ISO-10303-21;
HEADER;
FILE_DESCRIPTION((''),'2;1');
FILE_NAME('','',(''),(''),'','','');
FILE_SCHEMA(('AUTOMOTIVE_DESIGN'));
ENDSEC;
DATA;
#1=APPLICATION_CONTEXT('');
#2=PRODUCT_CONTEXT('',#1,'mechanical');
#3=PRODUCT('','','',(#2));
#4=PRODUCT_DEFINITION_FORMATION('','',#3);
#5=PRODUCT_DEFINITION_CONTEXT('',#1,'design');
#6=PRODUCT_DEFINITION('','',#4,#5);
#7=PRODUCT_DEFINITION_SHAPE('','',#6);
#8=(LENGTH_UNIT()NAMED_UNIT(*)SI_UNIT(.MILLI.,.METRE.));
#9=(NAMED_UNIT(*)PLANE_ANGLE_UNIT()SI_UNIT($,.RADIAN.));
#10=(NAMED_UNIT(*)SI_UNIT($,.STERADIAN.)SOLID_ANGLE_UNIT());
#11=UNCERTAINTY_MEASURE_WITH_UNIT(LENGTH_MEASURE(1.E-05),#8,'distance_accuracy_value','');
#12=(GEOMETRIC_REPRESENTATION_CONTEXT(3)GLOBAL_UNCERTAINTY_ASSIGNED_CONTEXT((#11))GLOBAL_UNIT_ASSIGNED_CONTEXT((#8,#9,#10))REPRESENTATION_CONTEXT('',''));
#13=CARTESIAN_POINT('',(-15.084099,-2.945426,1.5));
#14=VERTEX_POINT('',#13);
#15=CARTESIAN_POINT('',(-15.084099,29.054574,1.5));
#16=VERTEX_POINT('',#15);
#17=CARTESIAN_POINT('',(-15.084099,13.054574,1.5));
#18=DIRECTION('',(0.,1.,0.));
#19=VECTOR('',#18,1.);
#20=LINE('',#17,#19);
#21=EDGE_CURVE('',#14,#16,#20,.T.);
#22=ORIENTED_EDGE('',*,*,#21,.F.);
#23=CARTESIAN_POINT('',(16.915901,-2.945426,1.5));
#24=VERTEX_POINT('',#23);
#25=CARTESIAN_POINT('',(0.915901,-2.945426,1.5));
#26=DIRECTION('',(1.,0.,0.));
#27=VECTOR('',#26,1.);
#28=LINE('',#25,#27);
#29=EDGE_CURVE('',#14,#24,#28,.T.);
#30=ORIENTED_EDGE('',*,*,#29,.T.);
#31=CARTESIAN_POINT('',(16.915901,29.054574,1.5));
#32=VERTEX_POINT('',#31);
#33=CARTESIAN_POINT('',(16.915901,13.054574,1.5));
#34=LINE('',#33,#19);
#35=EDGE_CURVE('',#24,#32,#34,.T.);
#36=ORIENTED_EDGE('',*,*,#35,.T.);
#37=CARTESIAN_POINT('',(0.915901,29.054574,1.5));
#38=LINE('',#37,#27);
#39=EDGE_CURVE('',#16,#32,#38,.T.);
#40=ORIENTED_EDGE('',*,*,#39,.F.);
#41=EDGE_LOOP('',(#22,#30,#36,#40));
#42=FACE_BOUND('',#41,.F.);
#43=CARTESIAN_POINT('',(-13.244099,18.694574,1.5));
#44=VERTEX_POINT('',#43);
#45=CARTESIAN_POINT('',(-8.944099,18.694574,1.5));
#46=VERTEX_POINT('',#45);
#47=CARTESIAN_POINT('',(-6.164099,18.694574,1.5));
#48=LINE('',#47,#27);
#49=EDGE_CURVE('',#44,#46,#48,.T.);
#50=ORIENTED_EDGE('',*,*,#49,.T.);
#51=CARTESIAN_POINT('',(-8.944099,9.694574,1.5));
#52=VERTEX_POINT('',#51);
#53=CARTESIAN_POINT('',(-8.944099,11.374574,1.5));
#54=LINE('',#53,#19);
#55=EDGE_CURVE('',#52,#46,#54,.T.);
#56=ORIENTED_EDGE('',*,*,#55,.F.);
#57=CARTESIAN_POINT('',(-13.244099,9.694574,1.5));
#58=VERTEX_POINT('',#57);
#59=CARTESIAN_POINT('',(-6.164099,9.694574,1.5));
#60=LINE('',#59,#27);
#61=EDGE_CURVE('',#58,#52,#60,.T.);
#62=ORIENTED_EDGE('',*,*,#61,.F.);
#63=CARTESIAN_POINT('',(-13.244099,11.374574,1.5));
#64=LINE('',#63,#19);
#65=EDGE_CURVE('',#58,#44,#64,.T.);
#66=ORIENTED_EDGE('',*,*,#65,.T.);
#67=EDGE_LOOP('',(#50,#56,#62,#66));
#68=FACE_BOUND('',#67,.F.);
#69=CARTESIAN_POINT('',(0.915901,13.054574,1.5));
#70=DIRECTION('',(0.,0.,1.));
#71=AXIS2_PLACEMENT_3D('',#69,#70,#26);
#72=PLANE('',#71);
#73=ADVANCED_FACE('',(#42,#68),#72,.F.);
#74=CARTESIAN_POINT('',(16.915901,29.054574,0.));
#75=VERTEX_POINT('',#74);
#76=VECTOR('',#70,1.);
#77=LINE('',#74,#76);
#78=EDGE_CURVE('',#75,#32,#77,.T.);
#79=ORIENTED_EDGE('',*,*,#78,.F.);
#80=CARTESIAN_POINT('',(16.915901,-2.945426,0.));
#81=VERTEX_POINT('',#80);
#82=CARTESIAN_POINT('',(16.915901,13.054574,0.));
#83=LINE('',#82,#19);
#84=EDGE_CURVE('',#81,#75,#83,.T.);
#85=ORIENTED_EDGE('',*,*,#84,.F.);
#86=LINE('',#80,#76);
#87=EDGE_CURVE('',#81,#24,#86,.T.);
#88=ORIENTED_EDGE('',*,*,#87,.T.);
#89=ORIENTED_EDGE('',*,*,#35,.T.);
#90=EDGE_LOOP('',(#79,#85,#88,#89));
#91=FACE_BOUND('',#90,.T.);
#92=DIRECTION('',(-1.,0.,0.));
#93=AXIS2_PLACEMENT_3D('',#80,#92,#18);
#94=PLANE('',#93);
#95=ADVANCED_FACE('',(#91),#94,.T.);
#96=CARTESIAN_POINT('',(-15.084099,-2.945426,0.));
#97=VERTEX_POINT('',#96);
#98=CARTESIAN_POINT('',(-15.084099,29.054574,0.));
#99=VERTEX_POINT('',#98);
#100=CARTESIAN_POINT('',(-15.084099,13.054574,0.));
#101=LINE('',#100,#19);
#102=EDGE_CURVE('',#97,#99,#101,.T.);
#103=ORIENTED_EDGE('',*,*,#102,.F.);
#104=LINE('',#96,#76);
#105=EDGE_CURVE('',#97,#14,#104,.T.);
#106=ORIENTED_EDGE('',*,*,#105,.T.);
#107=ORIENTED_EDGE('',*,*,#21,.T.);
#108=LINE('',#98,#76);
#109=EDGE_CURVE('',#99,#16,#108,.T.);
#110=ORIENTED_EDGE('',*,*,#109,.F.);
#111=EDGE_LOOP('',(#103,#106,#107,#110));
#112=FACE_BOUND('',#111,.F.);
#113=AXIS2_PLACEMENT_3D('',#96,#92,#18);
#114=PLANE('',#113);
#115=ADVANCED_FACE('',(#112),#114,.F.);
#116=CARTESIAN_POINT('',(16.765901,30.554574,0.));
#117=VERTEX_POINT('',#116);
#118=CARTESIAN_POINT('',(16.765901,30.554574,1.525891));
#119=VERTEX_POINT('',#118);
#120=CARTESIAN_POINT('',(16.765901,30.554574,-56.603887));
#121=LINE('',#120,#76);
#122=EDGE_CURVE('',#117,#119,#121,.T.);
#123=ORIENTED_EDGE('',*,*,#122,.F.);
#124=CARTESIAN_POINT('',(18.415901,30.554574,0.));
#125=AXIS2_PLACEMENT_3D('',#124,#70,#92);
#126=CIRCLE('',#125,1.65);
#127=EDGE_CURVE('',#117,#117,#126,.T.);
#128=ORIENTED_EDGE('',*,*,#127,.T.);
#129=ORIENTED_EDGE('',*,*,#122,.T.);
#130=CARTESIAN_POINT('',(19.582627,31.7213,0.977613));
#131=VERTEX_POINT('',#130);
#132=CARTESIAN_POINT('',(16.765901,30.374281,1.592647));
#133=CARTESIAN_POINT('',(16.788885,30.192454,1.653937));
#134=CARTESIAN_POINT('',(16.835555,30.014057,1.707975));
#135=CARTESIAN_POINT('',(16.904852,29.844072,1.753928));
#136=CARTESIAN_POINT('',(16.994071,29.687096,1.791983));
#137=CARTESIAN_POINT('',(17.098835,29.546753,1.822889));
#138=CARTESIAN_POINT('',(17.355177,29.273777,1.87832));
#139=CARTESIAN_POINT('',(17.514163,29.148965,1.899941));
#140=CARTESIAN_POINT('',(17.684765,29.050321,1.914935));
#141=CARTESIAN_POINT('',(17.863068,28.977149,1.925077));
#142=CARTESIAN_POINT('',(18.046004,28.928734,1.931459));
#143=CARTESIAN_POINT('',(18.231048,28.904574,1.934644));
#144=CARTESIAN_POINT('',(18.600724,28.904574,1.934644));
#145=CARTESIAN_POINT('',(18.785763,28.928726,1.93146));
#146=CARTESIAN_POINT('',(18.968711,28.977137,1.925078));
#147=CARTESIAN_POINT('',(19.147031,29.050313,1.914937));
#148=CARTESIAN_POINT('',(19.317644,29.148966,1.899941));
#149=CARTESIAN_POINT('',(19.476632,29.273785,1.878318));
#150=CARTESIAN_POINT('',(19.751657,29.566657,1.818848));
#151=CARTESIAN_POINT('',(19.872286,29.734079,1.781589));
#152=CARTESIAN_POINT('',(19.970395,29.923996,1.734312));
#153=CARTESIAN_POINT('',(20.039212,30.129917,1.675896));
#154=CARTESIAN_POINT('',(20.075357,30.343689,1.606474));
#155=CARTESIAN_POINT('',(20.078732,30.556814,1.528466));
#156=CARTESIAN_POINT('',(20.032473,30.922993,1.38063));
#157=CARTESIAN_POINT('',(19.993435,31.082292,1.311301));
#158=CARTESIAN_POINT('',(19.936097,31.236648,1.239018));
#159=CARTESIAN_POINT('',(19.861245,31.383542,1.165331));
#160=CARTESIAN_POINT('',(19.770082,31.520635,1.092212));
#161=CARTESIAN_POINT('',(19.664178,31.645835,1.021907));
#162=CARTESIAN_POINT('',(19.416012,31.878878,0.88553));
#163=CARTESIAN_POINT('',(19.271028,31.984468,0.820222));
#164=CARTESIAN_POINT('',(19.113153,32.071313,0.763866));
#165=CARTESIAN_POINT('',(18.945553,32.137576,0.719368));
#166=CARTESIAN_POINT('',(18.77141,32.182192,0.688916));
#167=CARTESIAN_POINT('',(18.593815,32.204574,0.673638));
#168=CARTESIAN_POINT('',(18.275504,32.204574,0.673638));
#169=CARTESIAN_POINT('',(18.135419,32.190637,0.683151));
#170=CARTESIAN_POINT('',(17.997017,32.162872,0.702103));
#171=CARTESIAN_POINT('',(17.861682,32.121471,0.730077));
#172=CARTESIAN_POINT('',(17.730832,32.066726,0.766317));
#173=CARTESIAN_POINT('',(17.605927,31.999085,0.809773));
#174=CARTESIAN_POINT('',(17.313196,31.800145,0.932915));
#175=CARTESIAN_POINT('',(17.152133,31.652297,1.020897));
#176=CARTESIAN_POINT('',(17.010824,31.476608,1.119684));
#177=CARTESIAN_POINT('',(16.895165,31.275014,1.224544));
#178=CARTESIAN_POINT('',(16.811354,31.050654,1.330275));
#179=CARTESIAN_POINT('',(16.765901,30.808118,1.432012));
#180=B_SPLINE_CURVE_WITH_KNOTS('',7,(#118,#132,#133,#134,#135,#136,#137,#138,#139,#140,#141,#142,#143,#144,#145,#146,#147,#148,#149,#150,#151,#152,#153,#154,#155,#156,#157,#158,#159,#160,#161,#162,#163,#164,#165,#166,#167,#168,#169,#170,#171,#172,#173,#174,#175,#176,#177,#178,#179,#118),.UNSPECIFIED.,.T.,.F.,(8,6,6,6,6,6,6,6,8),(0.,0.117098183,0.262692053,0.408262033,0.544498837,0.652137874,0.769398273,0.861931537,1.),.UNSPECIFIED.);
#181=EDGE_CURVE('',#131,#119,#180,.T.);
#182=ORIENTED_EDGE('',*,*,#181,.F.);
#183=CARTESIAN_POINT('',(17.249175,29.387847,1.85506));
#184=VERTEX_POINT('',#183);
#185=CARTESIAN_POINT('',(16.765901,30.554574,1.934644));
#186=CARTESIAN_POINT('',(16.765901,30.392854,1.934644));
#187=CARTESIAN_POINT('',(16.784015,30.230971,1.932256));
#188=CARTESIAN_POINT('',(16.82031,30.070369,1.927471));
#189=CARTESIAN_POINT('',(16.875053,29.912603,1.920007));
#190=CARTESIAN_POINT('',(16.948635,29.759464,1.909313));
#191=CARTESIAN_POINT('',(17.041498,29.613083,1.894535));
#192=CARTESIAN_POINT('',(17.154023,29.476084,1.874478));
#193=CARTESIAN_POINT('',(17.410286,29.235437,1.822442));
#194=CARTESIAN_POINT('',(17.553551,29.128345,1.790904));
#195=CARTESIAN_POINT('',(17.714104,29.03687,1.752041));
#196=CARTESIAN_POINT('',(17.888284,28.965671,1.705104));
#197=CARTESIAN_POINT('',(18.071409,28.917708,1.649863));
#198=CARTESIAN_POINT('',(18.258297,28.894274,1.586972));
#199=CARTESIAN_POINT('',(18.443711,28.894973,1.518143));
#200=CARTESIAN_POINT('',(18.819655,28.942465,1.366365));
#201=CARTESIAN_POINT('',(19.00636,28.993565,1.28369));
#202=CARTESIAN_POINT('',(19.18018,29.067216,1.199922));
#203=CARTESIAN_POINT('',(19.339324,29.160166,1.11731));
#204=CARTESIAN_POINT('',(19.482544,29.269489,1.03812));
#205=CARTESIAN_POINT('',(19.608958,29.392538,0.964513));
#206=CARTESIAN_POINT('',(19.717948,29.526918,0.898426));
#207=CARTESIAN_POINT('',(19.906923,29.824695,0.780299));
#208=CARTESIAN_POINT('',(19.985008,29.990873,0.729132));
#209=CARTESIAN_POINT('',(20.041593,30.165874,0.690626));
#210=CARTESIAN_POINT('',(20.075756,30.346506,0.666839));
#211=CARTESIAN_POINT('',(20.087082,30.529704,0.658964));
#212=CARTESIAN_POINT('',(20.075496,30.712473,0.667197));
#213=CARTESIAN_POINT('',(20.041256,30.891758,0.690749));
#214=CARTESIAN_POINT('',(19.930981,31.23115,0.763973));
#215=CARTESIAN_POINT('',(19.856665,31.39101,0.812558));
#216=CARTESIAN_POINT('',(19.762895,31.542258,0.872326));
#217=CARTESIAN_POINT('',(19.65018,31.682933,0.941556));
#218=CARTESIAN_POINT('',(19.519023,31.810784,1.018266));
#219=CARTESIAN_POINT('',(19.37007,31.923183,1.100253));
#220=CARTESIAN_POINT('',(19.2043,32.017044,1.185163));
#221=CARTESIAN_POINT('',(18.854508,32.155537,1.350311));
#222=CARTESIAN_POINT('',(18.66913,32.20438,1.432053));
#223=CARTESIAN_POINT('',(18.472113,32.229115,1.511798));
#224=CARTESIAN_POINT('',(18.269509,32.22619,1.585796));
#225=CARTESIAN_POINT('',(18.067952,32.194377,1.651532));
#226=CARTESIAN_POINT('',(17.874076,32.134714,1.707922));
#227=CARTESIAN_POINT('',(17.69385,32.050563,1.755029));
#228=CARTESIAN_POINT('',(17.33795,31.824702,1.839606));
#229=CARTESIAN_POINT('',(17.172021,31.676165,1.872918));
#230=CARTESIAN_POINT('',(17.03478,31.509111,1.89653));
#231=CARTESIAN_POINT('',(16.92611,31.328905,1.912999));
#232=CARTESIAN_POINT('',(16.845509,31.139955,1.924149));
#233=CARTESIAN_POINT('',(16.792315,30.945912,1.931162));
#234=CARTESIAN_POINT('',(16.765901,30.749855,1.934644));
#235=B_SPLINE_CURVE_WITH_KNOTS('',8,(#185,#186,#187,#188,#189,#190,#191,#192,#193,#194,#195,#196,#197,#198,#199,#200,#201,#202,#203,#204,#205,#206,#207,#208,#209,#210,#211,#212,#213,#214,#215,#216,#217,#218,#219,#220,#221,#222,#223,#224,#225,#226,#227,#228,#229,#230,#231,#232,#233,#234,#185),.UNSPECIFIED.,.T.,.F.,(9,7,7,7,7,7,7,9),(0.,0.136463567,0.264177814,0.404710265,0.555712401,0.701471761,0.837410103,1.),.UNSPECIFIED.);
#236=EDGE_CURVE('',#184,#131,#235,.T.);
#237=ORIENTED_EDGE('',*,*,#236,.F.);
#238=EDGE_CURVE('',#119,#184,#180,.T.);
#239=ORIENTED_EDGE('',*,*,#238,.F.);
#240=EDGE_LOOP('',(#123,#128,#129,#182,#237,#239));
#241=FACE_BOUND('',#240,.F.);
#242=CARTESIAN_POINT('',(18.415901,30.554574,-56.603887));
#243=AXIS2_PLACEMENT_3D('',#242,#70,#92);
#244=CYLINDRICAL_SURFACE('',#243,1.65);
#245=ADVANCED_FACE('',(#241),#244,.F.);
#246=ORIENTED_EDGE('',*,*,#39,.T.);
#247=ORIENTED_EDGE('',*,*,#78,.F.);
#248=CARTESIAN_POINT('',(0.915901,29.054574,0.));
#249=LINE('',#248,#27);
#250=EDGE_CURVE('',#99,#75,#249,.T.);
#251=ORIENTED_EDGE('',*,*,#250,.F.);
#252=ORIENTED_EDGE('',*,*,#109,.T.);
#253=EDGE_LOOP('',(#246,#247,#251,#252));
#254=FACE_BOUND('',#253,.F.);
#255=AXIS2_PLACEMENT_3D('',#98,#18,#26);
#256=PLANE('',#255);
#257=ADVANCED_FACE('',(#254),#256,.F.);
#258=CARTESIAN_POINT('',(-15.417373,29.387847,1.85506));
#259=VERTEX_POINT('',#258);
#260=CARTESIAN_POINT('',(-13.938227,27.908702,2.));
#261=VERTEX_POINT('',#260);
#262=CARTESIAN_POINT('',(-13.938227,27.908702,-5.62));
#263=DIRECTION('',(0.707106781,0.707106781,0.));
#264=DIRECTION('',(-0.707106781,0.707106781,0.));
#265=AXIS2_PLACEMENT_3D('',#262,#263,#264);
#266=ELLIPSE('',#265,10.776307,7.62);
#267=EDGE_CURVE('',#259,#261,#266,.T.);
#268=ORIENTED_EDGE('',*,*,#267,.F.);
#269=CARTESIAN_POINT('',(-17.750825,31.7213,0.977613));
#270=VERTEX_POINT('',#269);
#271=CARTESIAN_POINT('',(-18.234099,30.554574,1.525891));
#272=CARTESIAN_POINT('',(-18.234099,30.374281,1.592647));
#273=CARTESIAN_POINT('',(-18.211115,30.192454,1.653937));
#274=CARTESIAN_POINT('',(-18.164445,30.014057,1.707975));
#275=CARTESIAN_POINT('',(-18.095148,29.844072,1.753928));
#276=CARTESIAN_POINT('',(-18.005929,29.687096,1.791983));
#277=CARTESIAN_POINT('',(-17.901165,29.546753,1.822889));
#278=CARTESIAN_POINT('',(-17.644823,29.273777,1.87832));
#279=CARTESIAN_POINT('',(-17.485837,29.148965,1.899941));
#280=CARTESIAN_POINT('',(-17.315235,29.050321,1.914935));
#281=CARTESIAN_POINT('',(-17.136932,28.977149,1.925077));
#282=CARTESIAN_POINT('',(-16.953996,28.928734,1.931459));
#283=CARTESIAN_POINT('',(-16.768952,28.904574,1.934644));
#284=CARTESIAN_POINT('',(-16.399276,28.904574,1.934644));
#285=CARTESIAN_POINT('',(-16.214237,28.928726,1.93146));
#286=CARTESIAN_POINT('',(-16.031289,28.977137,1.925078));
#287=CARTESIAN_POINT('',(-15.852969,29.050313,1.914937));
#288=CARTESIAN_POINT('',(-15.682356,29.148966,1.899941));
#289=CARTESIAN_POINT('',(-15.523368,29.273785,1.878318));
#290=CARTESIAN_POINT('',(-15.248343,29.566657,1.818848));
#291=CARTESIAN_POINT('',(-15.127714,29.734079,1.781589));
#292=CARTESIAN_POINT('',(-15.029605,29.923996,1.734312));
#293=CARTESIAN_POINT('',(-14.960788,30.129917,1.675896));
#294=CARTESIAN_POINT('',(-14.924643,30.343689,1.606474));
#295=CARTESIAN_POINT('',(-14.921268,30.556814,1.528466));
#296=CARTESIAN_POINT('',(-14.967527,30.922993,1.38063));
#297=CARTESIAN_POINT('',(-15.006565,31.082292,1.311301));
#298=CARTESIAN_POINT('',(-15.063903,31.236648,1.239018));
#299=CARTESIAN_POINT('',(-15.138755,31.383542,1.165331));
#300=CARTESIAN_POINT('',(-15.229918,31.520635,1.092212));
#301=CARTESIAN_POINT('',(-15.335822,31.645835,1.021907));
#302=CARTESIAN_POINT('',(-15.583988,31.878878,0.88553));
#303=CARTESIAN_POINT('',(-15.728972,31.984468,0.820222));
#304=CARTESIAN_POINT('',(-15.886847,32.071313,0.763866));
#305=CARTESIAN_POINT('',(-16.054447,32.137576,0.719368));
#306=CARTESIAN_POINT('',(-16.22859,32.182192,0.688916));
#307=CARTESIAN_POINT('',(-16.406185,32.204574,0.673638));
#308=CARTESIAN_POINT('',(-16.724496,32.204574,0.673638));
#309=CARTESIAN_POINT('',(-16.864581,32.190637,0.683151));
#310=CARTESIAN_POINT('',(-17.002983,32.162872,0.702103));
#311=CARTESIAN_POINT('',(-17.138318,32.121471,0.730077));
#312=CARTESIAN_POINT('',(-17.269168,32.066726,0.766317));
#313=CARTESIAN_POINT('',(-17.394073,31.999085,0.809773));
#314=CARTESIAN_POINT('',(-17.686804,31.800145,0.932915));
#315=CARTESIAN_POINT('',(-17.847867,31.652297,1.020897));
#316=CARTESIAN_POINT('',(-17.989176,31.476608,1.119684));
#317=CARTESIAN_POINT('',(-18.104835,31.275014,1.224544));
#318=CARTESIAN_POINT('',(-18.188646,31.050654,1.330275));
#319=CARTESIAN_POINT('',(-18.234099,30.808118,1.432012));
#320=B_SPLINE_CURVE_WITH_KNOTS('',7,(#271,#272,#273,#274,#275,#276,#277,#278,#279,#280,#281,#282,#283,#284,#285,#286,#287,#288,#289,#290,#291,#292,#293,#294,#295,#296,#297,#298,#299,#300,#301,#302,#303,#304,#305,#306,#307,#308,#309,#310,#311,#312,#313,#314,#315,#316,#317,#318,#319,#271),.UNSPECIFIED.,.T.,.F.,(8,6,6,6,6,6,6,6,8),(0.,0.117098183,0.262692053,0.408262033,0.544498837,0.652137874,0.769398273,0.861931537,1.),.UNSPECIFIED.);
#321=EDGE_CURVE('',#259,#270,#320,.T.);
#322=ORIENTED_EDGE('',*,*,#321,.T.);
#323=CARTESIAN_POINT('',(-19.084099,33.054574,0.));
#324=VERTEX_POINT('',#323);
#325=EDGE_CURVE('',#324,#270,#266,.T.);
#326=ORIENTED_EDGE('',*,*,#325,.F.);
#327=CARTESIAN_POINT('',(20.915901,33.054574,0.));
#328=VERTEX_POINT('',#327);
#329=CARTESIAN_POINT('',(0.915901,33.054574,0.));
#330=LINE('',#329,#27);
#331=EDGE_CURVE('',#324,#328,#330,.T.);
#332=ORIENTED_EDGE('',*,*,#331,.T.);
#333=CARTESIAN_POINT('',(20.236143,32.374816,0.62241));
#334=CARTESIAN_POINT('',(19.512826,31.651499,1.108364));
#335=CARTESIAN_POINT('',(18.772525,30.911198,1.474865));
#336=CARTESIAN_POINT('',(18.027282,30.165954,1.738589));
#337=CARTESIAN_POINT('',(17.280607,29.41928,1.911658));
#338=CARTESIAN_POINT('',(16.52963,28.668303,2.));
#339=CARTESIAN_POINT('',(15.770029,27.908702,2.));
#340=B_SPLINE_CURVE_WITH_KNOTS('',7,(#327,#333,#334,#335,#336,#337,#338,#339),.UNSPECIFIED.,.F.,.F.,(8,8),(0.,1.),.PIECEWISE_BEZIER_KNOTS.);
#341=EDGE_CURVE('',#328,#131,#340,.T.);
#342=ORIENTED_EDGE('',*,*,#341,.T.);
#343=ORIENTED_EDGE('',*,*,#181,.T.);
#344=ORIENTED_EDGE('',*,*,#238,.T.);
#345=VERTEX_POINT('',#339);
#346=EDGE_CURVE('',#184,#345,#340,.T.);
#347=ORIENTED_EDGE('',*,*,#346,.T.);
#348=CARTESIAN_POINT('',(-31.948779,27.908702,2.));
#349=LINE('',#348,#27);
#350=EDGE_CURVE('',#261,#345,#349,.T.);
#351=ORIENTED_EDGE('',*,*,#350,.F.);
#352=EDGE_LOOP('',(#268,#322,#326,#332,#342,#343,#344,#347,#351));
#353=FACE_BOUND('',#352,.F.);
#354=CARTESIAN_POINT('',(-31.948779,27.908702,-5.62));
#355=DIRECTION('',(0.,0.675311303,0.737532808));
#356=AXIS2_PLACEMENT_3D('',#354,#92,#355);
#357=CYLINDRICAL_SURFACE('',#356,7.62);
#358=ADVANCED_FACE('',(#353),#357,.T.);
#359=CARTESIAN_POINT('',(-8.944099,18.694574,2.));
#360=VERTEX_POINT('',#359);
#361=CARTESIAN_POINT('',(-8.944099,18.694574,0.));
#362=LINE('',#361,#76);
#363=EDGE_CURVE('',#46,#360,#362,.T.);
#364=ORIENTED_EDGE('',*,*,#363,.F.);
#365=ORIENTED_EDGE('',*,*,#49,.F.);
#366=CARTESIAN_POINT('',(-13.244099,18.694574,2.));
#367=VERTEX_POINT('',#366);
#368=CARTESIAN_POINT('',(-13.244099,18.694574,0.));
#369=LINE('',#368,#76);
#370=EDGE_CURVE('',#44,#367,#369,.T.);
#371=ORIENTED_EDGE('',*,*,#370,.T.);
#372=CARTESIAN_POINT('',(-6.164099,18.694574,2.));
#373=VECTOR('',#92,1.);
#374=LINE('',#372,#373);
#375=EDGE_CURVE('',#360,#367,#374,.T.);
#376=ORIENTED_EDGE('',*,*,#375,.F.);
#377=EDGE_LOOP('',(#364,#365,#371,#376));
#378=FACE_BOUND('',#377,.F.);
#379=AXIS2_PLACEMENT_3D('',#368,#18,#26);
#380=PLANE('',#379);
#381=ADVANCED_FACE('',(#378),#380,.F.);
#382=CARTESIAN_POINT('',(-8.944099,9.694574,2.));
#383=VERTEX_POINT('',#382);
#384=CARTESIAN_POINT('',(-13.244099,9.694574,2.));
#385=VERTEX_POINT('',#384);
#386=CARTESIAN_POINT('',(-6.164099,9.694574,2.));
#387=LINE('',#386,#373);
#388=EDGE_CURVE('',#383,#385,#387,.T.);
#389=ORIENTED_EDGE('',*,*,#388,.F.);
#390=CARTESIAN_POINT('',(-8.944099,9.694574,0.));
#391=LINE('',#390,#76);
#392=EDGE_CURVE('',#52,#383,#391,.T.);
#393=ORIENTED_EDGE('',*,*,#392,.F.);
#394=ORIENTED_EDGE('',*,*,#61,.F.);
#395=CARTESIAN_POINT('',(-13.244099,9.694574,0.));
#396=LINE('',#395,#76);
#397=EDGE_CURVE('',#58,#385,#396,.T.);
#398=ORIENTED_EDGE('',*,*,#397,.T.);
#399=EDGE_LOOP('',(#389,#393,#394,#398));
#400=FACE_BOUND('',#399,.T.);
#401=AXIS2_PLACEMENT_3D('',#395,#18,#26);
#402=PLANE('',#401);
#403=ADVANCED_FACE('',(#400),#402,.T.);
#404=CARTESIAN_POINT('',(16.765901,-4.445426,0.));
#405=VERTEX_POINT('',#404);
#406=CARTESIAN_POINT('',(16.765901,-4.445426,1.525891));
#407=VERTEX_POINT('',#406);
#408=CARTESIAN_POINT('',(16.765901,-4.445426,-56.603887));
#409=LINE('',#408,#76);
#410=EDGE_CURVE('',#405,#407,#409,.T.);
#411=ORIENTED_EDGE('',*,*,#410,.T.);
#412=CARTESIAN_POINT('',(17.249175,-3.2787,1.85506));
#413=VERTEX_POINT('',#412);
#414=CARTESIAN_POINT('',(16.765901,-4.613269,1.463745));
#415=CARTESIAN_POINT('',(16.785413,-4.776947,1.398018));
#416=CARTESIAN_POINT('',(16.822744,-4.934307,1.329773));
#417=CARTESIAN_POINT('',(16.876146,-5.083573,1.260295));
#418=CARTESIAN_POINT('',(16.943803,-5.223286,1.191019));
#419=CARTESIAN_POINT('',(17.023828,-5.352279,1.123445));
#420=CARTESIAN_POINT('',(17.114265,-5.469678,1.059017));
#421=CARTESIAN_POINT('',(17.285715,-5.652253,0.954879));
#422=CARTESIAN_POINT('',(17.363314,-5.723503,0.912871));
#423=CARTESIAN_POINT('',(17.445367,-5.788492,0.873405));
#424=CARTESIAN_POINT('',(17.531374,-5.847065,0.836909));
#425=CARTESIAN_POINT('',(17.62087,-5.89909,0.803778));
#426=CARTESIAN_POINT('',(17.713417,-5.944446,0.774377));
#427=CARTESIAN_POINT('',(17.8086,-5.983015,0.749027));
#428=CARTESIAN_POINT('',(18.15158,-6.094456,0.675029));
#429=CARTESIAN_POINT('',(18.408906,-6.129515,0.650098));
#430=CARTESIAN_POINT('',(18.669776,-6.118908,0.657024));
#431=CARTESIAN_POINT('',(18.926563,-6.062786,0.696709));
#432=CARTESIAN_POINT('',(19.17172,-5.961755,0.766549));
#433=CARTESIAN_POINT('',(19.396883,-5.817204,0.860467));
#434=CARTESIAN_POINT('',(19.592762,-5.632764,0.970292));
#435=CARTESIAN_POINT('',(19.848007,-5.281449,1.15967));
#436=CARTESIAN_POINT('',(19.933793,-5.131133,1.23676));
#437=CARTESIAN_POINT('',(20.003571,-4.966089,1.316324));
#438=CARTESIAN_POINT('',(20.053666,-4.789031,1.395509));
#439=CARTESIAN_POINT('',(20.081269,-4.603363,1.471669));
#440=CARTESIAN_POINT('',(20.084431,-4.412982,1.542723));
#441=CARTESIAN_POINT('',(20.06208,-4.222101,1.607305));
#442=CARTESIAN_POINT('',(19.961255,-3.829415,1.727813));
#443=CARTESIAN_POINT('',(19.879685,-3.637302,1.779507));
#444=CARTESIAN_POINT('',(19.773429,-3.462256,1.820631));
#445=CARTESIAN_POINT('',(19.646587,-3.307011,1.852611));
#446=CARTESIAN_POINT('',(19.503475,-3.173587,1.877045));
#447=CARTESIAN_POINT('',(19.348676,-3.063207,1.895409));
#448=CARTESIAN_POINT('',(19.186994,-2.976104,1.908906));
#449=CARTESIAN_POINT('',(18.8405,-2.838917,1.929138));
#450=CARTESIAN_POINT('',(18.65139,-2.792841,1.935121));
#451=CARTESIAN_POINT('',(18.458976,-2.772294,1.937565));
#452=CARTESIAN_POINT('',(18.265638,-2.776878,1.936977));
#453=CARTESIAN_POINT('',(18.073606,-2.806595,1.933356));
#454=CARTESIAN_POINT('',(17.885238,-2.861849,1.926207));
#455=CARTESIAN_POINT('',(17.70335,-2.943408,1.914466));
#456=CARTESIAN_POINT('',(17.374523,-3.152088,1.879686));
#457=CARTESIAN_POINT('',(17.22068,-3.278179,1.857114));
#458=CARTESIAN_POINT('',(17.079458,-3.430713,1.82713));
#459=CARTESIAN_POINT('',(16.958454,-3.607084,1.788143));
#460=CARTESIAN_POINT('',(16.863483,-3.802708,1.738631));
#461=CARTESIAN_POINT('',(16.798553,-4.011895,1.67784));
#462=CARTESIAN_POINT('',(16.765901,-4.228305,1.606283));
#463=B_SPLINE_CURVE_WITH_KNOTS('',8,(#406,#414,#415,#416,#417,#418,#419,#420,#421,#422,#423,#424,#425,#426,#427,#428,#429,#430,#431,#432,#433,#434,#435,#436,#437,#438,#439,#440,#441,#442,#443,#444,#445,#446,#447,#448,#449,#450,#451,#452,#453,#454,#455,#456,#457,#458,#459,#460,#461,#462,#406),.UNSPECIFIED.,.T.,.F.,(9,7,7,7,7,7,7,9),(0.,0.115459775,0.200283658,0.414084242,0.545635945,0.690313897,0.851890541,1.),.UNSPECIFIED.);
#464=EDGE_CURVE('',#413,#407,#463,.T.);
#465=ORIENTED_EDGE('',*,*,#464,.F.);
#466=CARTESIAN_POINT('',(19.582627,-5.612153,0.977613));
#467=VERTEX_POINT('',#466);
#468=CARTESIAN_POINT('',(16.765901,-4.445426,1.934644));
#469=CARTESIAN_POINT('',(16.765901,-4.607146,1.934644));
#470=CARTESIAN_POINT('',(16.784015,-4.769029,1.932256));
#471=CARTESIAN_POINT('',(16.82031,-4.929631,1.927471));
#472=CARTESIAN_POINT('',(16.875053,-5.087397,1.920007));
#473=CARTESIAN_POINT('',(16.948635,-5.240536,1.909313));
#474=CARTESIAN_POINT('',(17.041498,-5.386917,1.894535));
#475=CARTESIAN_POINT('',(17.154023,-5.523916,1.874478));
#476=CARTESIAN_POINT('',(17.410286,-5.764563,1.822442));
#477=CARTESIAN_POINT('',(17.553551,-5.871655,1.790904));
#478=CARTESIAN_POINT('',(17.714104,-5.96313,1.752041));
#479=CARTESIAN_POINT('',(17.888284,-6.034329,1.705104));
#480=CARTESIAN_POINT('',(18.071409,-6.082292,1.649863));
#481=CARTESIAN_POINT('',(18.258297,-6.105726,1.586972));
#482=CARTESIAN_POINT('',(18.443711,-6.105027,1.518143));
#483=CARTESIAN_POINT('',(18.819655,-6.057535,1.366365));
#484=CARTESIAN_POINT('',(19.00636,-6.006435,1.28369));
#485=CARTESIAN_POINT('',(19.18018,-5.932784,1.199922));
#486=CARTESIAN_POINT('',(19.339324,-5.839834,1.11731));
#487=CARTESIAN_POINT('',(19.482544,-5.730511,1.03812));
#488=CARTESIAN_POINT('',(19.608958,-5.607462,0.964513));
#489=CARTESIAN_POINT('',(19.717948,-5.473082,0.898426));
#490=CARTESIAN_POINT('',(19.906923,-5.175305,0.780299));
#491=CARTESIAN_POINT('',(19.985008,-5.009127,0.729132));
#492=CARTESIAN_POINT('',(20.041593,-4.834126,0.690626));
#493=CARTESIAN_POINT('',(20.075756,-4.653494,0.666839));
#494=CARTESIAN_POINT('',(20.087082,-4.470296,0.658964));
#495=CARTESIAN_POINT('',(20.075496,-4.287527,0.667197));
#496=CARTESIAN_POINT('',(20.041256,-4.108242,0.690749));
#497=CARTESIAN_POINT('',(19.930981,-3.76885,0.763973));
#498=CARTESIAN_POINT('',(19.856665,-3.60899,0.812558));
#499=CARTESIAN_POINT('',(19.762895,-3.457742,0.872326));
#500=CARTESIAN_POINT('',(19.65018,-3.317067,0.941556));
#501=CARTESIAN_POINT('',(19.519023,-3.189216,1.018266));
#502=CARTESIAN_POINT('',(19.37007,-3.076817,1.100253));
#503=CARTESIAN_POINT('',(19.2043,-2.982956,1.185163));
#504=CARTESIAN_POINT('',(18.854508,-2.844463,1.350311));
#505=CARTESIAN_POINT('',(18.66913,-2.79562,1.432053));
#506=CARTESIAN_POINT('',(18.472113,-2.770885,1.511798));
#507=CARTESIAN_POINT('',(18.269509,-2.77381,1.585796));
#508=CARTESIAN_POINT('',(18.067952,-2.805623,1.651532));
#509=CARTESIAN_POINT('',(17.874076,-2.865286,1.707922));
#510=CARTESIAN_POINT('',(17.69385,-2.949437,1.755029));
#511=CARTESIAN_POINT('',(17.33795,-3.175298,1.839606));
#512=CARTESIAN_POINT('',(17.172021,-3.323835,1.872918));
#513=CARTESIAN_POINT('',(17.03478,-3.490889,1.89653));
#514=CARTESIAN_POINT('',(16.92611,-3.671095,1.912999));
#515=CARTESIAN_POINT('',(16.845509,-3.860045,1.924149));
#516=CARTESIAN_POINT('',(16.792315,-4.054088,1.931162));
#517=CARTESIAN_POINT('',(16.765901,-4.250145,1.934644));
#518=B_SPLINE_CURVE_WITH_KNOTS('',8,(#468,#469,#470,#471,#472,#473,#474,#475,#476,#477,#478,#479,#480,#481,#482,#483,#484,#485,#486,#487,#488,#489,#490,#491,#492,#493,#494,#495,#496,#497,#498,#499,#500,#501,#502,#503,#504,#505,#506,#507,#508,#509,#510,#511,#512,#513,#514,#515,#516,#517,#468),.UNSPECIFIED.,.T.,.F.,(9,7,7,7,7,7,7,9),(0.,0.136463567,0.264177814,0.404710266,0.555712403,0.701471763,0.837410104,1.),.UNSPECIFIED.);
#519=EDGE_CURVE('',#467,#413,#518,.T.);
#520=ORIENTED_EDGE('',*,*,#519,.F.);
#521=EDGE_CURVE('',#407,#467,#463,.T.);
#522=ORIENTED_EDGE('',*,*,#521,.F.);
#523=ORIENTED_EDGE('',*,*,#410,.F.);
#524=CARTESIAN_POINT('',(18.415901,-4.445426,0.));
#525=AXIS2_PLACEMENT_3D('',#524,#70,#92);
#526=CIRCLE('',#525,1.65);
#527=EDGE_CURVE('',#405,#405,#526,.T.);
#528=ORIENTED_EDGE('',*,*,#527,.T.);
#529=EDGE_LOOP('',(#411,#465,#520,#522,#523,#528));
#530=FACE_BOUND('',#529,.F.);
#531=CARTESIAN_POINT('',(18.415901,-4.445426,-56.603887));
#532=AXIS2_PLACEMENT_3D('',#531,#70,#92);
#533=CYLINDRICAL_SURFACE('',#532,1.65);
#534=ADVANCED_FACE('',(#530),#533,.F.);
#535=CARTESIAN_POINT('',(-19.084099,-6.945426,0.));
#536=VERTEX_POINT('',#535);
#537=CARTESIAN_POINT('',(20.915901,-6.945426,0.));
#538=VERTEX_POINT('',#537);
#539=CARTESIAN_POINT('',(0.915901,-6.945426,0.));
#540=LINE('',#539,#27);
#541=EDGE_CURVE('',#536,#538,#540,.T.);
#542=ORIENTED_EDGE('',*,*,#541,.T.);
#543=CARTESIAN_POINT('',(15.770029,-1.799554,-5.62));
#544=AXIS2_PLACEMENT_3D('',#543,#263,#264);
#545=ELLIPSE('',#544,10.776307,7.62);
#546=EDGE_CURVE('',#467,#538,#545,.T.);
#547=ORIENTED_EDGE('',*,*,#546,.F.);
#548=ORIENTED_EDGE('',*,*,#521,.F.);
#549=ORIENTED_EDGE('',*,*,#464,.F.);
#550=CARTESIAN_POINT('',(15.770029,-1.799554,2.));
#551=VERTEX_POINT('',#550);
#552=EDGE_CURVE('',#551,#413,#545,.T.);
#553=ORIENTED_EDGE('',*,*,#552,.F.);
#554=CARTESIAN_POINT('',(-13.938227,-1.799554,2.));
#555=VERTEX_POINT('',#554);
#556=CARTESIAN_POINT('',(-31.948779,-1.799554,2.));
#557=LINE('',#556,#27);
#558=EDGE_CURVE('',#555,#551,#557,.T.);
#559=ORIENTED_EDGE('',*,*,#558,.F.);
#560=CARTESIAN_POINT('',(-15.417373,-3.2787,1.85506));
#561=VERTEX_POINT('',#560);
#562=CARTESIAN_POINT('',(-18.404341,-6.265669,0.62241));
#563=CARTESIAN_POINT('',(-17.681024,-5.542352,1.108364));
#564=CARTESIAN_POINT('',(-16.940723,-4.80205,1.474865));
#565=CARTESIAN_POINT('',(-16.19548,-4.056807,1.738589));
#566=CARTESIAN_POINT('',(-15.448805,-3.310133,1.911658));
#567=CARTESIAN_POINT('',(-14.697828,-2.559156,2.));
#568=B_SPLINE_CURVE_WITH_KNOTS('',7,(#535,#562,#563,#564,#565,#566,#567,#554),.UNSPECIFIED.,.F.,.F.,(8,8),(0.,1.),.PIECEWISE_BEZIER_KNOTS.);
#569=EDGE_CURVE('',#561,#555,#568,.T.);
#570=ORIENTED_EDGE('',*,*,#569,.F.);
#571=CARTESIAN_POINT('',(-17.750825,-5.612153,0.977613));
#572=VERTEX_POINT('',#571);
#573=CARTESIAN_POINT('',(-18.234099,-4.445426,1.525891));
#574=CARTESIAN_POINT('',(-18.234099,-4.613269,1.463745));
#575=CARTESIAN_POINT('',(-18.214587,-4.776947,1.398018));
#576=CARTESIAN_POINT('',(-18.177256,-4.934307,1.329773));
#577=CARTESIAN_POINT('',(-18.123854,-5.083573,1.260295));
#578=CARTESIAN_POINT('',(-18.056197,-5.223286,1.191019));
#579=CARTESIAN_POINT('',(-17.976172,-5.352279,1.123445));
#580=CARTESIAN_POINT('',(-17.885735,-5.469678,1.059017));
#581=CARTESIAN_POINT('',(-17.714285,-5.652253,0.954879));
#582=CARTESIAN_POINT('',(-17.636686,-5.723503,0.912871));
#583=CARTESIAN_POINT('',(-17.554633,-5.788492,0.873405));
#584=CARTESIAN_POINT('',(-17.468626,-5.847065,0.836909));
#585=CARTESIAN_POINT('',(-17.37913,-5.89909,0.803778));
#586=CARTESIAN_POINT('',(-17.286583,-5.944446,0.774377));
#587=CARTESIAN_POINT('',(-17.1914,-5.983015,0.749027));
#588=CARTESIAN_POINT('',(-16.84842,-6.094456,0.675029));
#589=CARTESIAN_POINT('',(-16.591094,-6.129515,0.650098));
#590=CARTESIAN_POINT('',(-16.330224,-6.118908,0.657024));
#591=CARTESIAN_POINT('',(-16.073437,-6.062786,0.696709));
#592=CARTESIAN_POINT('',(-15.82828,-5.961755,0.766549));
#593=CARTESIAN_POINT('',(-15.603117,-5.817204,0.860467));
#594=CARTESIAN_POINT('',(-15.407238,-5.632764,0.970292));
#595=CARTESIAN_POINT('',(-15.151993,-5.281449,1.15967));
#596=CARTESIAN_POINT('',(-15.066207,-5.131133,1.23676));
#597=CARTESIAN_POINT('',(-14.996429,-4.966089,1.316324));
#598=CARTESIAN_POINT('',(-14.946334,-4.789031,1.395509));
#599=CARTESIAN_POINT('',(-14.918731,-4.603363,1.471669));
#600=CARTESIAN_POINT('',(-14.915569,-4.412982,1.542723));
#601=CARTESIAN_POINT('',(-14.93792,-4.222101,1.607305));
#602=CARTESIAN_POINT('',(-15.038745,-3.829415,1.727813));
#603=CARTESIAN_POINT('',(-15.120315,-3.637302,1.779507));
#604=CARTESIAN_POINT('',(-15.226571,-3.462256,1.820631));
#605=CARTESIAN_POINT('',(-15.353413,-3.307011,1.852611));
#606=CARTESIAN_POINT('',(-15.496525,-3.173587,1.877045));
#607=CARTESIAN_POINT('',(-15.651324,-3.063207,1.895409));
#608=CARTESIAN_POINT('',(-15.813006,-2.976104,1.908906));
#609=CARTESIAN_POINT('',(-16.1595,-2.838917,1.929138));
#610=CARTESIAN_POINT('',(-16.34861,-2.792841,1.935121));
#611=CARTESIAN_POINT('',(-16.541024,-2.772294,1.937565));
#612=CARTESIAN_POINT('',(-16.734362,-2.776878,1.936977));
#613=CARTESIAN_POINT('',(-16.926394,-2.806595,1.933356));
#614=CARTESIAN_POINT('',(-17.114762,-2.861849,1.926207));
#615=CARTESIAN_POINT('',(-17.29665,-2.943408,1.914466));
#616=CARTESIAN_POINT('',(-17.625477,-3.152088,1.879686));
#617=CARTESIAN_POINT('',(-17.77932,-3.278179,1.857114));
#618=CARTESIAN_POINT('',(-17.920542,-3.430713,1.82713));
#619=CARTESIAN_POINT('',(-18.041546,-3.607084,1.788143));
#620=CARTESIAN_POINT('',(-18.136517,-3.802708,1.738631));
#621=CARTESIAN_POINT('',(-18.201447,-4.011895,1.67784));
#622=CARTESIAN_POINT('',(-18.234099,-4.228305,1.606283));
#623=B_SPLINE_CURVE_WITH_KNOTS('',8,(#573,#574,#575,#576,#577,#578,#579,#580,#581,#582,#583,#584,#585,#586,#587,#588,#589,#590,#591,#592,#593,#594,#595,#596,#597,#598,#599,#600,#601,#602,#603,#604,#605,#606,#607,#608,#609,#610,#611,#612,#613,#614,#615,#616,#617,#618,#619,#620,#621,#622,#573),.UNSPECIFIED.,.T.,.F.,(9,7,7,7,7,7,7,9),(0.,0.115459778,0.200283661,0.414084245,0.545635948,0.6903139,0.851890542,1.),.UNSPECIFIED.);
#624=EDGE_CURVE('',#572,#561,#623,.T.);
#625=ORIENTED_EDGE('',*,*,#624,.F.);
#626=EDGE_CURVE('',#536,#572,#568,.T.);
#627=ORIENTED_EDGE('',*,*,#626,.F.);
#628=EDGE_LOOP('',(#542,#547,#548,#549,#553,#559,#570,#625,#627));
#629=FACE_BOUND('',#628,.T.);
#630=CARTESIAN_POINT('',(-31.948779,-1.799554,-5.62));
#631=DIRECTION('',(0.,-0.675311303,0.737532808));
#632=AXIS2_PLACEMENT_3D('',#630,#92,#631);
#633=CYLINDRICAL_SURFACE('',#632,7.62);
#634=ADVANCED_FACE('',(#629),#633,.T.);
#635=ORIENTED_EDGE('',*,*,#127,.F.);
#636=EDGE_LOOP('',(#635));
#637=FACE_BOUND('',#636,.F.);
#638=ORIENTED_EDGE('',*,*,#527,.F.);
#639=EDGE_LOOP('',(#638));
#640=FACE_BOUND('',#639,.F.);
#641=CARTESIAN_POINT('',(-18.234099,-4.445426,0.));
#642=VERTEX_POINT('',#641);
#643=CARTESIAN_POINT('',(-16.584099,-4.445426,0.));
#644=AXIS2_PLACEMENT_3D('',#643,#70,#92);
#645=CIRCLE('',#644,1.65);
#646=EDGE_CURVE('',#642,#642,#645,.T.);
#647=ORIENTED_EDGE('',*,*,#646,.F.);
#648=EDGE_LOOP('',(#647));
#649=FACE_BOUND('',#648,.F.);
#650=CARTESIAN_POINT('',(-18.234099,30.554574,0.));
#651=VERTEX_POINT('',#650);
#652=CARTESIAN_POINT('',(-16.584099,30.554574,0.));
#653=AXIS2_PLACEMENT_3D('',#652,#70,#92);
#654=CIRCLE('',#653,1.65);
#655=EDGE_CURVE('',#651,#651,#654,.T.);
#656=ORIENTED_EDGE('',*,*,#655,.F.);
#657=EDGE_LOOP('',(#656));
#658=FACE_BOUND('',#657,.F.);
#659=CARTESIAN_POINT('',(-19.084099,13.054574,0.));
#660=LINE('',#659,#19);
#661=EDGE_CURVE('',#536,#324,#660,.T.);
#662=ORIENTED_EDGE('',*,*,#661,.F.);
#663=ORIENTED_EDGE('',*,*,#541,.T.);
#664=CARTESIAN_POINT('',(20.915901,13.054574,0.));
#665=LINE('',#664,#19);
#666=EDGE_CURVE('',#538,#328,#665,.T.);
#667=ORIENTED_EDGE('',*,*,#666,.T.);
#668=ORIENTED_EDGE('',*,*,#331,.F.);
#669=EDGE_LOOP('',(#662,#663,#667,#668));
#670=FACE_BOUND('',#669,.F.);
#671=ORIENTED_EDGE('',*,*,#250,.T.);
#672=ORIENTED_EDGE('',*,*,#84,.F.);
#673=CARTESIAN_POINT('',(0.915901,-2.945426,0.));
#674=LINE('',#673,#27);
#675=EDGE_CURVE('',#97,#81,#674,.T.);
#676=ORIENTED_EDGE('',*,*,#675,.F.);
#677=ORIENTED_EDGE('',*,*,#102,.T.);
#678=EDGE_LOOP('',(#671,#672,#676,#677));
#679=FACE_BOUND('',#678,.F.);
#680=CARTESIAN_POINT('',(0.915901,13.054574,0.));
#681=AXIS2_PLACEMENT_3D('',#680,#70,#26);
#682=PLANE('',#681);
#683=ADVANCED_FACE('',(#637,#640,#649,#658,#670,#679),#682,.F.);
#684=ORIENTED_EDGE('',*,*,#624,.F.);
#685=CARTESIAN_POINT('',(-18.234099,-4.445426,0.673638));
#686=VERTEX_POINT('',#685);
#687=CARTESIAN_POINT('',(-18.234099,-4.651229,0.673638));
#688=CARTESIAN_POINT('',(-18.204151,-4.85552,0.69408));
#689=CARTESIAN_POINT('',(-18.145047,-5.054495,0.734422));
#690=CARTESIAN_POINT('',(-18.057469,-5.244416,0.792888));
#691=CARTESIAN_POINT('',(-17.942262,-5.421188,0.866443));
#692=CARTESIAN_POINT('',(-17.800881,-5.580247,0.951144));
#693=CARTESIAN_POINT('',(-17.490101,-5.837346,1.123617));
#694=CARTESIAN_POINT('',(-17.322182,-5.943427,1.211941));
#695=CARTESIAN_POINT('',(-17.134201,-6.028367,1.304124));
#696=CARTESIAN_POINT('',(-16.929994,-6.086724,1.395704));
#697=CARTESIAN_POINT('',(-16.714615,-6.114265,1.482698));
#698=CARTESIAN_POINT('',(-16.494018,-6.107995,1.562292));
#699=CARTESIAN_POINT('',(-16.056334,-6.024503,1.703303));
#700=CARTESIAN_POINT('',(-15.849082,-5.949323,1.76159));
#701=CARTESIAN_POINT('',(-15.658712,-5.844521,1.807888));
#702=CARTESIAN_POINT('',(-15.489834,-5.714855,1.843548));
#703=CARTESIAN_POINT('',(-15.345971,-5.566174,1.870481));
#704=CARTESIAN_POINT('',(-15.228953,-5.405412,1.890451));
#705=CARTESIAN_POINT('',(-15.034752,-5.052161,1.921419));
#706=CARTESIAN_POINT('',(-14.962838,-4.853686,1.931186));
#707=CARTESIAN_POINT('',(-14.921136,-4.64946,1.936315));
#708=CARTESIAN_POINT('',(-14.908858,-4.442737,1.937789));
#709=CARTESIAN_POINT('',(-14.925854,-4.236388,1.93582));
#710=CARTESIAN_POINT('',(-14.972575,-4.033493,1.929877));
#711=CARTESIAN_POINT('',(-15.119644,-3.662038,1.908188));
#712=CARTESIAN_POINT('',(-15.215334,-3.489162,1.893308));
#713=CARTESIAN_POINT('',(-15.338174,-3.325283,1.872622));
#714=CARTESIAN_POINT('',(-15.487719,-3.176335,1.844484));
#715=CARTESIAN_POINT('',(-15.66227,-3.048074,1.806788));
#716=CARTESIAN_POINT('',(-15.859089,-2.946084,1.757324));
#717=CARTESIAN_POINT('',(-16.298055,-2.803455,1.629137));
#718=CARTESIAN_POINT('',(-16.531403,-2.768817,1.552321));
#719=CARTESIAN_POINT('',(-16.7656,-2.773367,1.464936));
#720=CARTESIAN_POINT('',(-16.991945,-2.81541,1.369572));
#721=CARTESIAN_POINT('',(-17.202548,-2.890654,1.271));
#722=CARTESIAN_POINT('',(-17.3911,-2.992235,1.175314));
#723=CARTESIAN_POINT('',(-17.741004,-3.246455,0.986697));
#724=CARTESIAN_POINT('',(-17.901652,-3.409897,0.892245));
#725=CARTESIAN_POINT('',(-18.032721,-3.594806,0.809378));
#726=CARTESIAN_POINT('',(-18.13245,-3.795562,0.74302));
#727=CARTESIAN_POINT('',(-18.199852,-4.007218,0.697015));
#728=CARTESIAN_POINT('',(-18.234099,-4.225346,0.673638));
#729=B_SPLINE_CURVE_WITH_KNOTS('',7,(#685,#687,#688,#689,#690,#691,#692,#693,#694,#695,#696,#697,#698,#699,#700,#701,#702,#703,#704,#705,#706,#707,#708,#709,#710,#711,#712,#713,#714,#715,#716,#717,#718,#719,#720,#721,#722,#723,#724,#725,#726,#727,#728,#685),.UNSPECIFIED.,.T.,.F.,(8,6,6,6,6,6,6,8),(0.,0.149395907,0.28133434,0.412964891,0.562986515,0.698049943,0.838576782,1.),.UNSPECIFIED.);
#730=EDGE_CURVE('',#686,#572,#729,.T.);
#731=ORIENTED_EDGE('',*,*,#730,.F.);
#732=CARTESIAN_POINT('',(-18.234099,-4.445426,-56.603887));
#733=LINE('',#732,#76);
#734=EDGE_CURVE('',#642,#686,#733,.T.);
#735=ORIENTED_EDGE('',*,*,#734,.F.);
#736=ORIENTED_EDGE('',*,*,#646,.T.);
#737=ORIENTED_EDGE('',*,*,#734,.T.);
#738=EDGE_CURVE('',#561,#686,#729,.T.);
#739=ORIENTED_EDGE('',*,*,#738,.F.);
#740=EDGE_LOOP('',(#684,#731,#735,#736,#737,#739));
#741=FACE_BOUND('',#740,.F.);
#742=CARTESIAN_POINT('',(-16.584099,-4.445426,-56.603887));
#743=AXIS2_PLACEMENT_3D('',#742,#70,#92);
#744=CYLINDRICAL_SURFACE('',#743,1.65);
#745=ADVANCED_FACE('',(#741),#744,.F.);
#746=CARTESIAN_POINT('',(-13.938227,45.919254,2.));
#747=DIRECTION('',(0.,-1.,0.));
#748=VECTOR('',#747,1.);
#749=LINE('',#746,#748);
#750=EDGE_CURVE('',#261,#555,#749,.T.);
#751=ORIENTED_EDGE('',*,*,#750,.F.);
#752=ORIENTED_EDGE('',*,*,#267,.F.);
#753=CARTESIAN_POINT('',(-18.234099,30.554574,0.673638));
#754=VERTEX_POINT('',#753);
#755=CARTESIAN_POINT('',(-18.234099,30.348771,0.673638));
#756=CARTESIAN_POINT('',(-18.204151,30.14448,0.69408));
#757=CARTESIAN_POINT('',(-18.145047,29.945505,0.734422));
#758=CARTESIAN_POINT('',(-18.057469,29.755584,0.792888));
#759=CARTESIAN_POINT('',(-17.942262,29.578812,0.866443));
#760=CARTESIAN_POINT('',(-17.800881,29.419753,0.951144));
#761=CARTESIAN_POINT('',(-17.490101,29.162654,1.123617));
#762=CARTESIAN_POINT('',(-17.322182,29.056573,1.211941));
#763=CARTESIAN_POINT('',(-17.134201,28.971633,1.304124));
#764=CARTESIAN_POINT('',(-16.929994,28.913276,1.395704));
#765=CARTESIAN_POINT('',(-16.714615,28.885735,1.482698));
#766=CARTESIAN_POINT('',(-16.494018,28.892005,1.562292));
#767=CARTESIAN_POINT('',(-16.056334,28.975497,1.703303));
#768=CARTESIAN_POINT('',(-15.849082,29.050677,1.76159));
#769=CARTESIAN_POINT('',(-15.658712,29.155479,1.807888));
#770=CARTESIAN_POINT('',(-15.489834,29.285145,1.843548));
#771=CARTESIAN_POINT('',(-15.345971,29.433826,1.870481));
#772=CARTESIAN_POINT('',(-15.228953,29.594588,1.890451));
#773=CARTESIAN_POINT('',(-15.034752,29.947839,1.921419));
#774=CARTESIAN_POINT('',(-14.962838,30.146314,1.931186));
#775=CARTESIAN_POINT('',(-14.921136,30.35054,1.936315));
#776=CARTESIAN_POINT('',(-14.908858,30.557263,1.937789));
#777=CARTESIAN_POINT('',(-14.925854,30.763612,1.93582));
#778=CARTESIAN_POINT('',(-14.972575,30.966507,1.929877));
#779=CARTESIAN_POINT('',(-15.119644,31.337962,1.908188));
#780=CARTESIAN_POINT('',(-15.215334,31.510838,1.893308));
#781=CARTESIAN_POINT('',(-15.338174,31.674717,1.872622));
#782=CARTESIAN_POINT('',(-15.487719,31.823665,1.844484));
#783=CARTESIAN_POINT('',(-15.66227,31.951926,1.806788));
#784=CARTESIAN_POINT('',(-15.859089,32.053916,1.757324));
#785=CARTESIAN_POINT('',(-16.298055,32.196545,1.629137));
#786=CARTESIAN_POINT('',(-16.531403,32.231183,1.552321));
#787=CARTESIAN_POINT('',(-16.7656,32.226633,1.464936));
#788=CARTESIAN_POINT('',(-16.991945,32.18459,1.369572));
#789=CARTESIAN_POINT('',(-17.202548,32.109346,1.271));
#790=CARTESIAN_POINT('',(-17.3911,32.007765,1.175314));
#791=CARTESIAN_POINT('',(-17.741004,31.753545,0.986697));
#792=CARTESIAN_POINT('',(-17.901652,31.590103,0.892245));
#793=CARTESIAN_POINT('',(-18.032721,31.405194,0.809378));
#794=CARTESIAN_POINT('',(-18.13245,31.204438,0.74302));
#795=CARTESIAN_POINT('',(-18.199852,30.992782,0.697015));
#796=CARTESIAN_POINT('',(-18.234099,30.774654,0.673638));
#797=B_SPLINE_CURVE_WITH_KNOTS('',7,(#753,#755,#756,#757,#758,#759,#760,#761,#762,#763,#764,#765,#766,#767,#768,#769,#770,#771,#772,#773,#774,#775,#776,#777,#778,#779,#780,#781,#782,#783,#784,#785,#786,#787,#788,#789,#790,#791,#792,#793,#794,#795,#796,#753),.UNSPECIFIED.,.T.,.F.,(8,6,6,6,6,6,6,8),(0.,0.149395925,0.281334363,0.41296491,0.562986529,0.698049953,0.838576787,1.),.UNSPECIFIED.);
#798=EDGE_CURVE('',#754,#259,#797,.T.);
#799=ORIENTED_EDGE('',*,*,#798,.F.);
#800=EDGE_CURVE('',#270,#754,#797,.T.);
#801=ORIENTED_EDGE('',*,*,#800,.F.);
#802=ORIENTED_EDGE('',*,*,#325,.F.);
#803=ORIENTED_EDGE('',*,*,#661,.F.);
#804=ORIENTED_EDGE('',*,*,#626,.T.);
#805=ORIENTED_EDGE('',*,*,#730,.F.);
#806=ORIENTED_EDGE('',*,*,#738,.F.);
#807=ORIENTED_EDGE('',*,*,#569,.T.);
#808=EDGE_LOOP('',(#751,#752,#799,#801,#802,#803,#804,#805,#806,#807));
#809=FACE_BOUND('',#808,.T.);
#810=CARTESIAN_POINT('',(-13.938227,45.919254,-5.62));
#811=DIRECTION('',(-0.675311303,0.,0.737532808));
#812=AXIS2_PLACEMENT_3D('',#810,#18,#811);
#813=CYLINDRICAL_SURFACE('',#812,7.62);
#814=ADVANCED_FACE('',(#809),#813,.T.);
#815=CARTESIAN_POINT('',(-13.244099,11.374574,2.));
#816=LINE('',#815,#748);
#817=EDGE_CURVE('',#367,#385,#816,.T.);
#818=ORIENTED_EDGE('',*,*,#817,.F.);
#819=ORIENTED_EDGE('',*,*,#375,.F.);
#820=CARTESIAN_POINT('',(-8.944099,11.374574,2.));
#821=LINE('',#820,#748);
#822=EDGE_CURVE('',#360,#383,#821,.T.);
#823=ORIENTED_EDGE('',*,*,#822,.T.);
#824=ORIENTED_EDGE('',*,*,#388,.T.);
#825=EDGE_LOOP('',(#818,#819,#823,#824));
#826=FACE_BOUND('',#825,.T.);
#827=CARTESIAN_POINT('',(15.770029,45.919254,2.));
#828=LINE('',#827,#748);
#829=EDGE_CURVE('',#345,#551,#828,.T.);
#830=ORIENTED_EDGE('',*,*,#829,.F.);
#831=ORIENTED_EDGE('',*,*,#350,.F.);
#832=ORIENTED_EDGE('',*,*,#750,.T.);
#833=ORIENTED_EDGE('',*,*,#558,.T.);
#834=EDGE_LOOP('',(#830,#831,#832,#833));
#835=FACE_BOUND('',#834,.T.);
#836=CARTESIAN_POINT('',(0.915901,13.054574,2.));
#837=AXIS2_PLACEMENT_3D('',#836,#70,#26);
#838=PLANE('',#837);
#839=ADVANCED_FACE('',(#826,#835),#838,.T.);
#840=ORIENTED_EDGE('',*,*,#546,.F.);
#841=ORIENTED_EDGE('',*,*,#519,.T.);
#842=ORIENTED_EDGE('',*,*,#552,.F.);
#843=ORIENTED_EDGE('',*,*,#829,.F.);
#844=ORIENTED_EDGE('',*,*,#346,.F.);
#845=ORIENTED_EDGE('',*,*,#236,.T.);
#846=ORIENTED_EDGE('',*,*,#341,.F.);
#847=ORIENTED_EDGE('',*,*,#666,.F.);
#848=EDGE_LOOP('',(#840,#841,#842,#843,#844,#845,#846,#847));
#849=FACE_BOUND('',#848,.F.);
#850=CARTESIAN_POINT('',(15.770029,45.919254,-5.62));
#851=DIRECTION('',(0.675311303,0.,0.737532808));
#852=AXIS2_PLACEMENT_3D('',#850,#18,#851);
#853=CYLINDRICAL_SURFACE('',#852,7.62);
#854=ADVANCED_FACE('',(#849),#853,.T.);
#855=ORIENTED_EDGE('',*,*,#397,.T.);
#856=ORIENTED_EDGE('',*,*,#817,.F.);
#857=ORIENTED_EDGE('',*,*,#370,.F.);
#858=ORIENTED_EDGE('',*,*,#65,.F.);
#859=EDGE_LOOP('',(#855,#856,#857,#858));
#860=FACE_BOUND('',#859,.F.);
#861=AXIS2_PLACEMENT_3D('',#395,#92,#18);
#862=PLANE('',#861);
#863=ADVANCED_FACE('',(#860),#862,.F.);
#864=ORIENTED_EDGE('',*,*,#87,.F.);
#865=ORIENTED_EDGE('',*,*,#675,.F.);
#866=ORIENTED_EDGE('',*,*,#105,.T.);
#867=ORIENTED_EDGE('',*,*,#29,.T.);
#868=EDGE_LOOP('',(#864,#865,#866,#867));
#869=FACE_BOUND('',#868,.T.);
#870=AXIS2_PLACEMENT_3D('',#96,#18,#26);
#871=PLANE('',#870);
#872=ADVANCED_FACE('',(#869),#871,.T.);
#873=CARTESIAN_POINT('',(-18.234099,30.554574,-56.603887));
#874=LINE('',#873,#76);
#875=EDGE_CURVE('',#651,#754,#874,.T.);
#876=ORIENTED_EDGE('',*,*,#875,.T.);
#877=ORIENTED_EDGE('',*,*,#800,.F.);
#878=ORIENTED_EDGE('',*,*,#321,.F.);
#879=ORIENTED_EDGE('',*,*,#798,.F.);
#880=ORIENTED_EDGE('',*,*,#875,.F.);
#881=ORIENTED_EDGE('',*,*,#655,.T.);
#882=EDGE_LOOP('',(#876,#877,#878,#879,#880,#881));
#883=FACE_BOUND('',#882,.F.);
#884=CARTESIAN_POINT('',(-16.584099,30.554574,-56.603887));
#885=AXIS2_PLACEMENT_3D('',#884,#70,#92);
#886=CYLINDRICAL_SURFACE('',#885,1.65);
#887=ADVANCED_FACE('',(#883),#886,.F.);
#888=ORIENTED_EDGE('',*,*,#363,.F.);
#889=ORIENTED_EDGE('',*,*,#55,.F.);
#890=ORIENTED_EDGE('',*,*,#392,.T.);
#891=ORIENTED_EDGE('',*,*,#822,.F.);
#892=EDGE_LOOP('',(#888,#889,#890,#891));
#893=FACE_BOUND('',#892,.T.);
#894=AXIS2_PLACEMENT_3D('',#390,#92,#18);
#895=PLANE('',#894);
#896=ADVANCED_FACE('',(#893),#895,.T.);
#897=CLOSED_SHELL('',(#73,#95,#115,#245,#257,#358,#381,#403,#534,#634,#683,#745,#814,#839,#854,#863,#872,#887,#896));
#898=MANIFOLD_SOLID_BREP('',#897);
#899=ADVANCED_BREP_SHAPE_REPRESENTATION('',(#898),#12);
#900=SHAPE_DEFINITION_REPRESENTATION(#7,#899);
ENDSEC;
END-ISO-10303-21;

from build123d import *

# Parameters (mm, degrees)
F0_W        = 40
F0_H        = 40
F1_DEPTH    = 2
F2_T1_DEPTH = 65.7293606605
F2_T3_DEPTH = 65.7293606605
F3_D        = 3.3
F4_W        = 4.3
F4_H        = 9
F5_DEPTH    = 25
F6_W        = 32
F6_H        = 32
F7_DEPTH    = 1.5


# Not quite as in the source:
# - a fillet or chamfer that OpenCascade refuses, or shapes differently, is made with other operations: its cross-section is extruded or revolved along the edge and cut away or added


with BuildPart() as f1:
    # F0 (on Top) → F1 (new body)
    with BuildSketch(Plane.XY):
        with Locations((0.9159009159, 13.0545736344)):
            Rectangle(F0_W, F0_H)
    extrude(amount=F1_DEPTH)

    # F2: fillet of radius 7.62 on 4 edges, made by hand

    # F2_s2 → F2_t1 (cut)
    with BuildSketch(Plane.XZ.offset(-45.9192539647)):
        with BuildLine():
            ThreePointArc((-19.0840990841, 0), (-16.6986617004, 1.4824221221), (-13.938226952, 2))
            Line((-13.938226952, 2), (-19.0840990841, 2))
            Line((-19.0840990841, 2), (-19.0840990841, 0))
        make_face()
        with BuildLine():
            ThreePointArc((20.9159009159, 0), (18.5304635321, 1.4824221221), (15.7700287838, 2))
            Line((15.7700287838, 2), (20.9159009159, 2))
            Line((20.9159009159, 2), (20.9159009159, 0))
        make_face()
    extrude(amount=F2_T1_DEPTH, mode=Mode.SUBTRACT)

    # F2_s4 → F2_t3 (cut)
    with BuildSketch(Plane.YZ.offset(-31.9487794144)):
        with BuildLine():
            ThreePointArc((-6.9454263656, 0), (-4.5599889818, 1.4824221221), (-1.7995542335, 2))
            Line((-1.7995542335, 2), (-6.9454263656, 2))
            Line((-6.9454263656, 2), (-6.9454263656, 0))
        make_face()
        with BuildLine():
            ThreePointArc((33.0545736344, 0), (30.6691362507, 1.4824221221), (27.9087015023, 2))
            Line((27.9087015023, 2), (33.0545736344, 2))
            Line((33.0545736344, 2), (33.0545736344, 0))
        make_face()
    extrude(amount=F2_T3_DEPTH, mode=Mode.SUBTRACT)

    # F3 (through all)
    with Locations(Plane(origin=(0, 0, 0), x_dir=(1, 0, 0), z_dir=(0, 0, -1))):
        with Locations((-16.5840990841, 4.4454263656), (-16.5840990841, -30.5545736344), (18.4159009159, -30.5545736344), (18.4159009159, 4.4454263656)):
            Hole(F3_D / 2)

    # F4 (on Top) → F5 (cut)
    with BuildSketch(Plane.XY):
        with Locations((-11.0940990841, 14.1945736344)):
            Rectangle(F4_W, F4_H)
    extrude(amount=F5_DEPTH, mode=Mode.SUBTRACT)

    # F6 (on Top) → F7 (cut)
    with BuildSketch(Plane.XY):
        with Locations((0.9159009159, 13.0545736344)):
            Rectangle(F6_W, F6_H)
    extrude(amount=F7_DEPTH, mode=Mode.SUBTRACT)


solid = f1.part
